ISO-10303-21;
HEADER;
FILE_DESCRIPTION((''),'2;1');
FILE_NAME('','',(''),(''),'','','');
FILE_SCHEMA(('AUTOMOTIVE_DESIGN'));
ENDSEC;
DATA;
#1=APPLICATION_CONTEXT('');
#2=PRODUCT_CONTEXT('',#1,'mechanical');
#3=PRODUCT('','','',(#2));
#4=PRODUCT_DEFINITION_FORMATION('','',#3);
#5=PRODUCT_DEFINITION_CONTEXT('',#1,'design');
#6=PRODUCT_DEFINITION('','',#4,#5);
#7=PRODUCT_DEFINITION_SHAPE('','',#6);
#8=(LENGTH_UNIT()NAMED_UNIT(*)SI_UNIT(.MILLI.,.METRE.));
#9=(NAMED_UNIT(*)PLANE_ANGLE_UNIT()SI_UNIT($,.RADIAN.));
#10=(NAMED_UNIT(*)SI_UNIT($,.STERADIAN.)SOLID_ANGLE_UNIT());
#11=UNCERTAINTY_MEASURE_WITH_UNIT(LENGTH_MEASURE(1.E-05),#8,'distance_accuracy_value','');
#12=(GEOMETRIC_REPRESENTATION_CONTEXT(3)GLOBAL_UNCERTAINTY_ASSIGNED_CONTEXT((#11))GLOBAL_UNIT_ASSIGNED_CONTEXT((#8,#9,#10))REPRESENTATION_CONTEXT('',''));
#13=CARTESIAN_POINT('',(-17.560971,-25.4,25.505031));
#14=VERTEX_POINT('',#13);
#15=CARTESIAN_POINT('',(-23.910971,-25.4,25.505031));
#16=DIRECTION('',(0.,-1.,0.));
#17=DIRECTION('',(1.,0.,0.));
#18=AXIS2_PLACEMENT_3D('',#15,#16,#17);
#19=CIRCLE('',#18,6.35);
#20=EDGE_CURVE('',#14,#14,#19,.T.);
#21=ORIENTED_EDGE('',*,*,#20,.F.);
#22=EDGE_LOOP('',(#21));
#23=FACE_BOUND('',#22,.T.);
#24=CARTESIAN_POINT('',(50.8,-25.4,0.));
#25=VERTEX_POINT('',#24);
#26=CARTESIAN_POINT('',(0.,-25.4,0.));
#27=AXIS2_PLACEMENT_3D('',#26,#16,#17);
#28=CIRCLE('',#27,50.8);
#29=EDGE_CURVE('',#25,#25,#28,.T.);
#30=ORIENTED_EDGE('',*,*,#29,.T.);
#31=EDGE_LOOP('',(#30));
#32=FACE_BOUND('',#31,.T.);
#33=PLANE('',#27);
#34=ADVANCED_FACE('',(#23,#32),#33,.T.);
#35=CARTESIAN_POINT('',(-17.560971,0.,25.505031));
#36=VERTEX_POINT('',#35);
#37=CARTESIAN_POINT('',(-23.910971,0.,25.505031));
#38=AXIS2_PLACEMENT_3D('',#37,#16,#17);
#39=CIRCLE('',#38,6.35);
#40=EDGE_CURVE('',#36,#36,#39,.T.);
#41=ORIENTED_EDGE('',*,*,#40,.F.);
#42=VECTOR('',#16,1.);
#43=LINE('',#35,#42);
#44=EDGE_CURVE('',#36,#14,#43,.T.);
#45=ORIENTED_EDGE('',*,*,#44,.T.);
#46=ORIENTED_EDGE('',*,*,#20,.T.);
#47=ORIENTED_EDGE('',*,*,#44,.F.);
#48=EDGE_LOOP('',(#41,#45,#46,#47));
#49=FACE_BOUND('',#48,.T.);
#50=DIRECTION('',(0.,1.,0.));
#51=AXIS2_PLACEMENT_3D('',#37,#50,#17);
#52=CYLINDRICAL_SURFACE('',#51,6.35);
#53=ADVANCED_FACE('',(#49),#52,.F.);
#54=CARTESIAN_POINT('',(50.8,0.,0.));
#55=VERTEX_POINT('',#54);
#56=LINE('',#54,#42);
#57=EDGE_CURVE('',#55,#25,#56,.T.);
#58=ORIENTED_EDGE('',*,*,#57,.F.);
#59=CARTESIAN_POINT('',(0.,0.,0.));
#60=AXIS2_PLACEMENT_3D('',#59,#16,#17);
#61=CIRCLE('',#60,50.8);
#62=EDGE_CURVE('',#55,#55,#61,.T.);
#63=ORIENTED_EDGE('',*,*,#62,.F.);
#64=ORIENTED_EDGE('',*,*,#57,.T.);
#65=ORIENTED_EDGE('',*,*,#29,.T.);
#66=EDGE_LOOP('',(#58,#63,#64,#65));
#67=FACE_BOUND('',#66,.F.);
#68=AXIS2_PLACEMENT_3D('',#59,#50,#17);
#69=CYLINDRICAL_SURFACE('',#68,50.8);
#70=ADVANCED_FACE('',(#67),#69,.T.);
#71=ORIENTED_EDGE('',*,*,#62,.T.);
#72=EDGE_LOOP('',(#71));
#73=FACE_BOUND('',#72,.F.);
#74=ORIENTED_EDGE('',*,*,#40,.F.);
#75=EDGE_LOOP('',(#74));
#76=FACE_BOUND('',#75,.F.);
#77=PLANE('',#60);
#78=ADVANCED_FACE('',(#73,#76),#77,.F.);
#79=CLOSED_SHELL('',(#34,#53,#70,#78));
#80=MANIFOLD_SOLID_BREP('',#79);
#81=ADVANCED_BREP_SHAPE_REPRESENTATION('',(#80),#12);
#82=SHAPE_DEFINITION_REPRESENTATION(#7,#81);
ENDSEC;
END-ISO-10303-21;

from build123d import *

# Parameters (mm, degrees)
F0_R     = 50.8
F0_R_2   = 6.35
F1_DEPTH = 25.4


# Not quite as in the source:
# - a feature of the source that left no trace in its solid (it failed there, or was rolled back) is left out


with BuildPart() as f1:
    # F0 (on Front) → F1 (new body)
    with BuildSketch(Plane.XZ):
        Circle(F0_R)
        with Locations((-23.9109713584, 25.5050305277)):
            Circle(F0_R_2, mode=Mode.SUBTRACT)
    extrude(amount=F1_DEPTH)


solid = f1.part
